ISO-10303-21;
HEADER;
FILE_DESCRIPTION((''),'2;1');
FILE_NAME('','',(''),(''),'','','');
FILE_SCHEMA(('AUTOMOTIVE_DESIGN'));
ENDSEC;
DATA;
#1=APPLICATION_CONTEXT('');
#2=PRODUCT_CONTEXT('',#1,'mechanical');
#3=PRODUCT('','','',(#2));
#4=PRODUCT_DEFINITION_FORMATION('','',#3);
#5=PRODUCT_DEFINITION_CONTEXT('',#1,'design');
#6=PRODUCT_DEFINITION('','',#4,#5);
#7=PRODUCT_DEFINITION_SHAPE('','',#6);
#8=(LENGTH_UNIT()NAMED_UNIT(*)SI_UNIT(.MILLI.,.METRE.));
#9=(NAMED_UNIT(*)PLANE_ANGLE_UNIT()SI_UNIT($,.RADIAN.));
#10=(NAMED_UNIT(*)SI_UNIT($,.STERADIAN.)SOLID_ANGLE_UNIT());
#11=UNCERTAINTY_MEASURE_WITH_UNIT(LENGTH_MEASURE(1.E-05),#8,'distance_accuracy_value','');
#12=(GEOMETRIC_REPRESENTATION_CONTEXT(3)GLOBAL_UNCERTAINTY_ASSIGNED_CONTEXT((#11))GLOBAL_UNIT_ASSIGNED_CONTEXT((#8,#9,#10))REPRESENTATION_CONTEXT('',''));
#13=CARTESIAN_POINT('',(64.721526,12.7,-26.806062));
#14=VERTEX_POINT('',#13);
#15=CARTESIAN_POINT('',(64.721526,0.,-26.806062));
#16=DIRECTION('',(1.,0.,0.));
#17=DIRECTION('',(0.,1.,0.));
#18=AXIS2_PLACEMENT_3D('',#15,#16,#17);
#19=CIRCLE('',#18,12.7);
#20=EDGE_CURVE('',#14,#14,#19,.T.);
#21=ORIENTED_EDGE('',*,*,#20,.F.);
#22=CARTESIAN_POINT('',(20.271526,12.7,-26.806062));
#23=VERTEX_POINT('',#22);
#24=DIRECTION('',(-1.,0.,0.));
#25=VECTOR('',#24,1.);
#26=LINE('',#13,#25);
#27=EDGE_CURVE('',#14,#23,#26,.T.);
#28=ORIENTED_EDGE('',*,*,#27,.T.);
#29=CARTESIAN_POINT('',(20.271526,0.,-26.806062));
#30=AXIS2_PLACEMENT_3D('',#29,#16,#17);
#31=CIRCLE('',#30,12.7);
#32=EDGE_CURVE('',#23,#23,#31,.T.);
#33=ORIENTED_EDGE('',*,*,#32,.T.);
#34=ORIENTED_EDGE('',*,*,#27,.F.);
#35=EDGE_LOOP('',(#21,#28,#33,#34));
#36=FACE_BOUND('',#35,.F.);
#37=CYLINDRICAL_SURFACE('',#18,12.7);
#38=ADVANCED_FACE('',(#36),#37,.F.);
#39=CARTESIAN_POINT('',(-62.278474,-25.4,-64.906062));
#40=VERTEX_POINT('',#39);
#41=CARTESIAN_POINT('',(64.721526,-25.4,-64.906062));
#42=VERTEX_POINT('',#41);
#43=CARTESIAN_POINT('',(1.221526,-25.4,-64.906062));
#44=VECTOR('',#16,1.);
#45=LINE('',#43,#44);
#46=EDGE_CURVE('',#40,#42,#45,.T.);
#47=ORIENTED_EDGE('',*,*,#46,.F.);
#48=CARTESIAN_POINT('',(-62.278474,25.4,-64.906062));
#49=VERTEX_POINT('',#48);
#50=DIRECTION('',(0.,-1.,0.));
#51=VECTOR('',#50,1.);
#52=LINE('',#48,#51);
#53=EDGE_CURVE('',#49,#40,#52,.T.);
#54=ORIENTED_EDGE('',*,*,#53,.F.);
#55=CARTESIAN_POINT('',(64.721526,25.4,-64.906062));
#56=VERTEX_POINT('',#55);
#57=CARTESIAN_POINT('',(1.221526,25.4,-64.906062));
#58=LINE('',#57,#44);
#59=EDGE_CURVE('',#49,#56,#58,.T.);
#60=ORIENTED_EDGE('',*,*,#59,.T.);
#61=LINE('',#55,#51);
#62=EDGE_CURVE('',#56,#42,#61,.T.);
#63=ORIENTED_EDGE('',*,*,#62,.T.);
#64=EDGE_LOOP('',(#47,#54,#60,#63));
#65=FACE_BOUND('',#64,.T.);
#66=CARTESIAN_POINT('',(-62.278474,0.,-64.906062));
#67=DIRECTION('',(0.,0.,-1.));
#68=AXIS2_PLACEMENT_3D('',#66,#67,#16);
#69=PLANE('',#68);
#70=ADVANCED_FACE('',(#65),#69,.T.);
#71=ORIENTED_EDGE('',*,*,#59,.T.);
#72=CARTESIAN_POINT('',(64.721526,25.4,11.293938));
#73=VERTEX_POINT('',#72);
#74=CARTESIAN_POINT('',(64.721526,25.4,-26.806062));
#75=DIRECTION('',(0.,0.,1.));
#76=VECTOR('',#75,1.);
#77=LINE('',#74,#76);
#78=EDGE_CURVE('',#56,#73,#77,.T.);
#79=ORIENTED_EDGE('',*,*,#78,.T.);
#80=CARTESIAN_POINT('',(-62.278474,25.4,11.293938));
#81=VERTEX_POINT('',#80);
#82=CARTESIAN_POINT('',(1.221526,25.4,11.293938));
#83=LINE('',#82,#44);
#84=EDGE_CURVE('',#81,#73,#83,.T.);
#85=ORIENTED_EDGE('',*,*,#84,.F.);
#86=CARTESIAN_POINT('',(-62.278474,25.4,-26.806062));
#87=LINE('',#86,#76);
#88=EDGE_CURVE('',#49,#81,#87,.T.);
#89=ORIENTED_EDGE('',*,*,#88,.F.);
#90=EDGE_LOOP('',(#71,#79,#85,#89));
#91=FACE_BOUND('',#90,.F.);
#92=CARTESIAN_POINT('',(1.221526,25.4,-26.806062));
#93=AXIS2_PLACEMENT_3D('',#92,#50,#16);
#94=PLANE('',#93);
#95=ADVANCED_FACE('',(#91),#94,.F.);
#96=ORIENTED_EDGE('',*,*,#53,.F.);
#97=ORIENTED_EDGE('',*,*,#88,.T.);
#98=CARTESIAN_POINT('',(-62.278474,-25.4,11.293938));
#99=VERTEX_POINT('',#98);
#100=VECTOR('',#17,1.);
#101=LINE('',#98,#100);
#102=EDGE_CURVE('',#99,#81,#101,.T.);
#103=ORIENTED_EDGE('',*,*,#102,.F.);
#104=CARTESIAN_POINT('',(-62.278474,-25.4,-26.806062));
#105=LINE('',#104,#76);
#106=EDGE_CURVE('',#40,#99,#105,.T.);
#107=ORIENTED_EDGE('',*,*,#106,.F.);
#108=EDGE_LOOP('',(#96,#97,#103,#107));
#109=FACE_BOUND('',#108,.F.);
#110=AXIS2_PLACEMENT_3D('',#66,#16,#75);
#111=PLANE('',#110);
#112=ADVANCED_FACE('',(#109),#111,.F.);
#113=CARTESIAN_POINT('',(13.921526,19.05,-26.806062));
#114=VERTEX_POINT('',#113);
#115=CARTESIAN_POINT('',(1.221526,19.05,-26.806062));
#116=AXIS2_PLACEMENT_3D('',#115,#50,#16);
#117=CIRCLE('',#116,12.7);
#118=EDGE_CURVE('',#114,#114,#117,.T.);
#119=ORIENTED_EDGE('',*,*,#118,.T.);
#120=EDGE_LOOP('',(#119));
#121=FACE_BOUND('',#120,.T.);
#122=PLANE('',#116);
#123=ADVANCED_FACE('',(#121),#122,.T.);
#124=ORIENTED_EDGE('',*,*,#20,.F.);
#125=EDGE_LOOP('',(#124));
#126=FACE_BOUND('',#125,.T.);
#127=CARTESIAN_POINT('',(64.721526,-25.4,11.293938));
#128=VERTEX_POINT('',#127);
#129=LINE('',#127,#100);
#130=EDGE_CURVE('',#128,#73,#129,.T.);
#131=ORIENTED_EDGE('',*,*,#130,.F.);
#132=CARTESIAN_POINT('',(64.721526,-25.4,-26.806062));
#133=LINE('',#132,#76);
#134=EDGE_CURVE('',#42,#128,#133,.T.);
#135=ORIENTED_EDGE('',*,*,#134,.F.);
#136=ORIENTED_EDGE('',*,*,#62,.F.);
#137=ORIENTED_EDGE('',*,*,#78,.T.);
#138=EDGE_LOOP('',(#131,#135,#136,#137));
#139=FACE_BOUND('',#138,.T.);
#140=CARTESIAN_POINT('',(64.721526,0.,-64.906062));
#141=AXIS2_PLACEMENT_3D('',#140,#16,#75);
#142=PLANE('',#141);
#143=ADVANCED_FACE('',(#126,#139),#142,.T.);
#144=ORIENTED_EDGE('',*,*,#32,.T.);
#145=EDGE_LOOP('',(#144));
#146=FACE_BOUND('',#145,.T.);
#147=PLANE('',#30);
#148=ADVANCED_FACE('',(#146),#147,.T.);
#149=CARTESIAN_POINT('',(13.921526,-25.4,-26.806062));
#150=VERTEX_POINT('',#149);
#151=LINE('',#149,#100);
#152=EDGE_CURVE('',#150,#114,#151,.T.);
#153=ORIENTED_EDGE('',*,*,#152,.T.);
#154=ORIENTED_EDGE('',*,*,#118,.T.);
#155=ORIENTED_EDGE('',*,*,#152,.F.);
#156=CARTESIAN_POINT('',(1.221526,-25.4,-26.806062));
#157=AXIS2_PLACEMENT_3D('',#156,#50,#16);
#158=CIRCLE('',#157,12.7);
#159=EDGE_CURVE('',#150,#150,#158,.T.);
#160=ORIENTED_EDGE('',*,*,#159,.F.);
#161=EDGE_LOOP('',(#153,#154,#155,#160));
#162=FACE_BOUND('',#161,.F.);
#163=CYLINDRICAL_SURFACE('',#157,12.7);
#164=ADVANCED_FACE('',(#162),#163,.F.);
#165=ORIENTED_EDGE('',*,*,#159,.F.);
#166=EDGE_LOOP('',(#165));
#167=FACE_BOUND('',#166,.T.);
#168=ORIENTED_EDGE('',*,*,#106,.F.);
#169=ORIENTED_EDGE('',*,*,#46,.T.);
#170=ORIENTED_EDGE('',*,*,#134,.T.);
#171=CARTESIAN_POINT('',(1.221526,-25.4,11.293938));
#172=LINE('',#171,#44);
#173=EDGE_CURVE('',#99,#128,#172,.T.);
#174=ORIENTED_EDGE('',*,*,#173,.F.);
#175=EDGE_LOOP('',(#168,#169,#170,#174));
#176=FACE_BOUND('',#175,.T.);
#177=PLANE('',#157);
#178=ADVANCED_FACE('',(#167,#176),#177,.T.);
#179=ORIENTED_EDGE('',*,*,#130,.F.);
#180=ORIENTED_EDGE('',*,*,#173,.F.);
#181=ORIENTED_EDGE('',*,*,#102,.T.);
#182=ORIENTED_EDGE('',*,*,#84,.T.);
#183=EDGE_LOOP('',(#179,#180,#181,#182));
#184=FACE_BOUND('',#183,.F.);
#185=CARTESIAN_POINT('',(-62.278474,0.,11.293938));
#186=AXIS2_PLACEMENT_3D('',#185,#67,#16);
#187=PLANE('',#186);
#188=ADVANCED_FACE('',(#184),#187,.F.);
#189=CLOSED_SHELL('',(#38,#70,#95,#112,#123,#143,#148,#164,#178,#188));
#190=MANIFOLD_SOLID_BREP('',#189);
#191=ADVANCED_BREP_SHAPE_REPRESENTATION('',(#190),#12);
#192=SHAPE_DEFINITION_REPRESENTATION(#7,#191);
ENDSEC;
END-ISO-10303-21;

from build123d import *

# Parameters (mm, degrees)
F0_W          = 127
F0_H          = 76.2
F1_DEPTH      = 25.4
F1_DEPTH_BACK = 25.4
F2_R          = 12.7
F3_DEPTH      = 44.45
F4_R          = 12.7
F5_DEPTH      = 44.45


# Not quite as in the source:
# - a feature names something its author has since deleted; it is built from what else it names


with BuildPart() as f1:
    # F0 (on Front) → F1 (new body, two sides)
    with BuildSketch(Plane.XZ) as f1_sk:
        with Locations((1.2215264142, -26.8060624134)):
            Rectangle(F0_W, F0_H)
    extrude(amount=F1_DEPTH)
    extrude(f1_sk.sketch, amount=-F1_DEPTH_BACK)

    # F2 (on face) → F3 (cut)
    with BuildSketch(Plane.XZ.offset(25.4)):
        with Locations((1.2215264142, -26.8060624134)):
            Circle(F2_R)
    extrude(amount=-F3_DEPTH, mode=Mode.SUBTRACT)

    # F4 (on face) → F5 (cut)
    with BuildSketch(Plane.YZ.offset(64.7215264142)):
        with Locations((0, -26.8060624134)):
            Circle(F4_R)
    extrude(amount=-F5_DEPTH, mode=Mode.SUBTRACT)


solid = f1.part
